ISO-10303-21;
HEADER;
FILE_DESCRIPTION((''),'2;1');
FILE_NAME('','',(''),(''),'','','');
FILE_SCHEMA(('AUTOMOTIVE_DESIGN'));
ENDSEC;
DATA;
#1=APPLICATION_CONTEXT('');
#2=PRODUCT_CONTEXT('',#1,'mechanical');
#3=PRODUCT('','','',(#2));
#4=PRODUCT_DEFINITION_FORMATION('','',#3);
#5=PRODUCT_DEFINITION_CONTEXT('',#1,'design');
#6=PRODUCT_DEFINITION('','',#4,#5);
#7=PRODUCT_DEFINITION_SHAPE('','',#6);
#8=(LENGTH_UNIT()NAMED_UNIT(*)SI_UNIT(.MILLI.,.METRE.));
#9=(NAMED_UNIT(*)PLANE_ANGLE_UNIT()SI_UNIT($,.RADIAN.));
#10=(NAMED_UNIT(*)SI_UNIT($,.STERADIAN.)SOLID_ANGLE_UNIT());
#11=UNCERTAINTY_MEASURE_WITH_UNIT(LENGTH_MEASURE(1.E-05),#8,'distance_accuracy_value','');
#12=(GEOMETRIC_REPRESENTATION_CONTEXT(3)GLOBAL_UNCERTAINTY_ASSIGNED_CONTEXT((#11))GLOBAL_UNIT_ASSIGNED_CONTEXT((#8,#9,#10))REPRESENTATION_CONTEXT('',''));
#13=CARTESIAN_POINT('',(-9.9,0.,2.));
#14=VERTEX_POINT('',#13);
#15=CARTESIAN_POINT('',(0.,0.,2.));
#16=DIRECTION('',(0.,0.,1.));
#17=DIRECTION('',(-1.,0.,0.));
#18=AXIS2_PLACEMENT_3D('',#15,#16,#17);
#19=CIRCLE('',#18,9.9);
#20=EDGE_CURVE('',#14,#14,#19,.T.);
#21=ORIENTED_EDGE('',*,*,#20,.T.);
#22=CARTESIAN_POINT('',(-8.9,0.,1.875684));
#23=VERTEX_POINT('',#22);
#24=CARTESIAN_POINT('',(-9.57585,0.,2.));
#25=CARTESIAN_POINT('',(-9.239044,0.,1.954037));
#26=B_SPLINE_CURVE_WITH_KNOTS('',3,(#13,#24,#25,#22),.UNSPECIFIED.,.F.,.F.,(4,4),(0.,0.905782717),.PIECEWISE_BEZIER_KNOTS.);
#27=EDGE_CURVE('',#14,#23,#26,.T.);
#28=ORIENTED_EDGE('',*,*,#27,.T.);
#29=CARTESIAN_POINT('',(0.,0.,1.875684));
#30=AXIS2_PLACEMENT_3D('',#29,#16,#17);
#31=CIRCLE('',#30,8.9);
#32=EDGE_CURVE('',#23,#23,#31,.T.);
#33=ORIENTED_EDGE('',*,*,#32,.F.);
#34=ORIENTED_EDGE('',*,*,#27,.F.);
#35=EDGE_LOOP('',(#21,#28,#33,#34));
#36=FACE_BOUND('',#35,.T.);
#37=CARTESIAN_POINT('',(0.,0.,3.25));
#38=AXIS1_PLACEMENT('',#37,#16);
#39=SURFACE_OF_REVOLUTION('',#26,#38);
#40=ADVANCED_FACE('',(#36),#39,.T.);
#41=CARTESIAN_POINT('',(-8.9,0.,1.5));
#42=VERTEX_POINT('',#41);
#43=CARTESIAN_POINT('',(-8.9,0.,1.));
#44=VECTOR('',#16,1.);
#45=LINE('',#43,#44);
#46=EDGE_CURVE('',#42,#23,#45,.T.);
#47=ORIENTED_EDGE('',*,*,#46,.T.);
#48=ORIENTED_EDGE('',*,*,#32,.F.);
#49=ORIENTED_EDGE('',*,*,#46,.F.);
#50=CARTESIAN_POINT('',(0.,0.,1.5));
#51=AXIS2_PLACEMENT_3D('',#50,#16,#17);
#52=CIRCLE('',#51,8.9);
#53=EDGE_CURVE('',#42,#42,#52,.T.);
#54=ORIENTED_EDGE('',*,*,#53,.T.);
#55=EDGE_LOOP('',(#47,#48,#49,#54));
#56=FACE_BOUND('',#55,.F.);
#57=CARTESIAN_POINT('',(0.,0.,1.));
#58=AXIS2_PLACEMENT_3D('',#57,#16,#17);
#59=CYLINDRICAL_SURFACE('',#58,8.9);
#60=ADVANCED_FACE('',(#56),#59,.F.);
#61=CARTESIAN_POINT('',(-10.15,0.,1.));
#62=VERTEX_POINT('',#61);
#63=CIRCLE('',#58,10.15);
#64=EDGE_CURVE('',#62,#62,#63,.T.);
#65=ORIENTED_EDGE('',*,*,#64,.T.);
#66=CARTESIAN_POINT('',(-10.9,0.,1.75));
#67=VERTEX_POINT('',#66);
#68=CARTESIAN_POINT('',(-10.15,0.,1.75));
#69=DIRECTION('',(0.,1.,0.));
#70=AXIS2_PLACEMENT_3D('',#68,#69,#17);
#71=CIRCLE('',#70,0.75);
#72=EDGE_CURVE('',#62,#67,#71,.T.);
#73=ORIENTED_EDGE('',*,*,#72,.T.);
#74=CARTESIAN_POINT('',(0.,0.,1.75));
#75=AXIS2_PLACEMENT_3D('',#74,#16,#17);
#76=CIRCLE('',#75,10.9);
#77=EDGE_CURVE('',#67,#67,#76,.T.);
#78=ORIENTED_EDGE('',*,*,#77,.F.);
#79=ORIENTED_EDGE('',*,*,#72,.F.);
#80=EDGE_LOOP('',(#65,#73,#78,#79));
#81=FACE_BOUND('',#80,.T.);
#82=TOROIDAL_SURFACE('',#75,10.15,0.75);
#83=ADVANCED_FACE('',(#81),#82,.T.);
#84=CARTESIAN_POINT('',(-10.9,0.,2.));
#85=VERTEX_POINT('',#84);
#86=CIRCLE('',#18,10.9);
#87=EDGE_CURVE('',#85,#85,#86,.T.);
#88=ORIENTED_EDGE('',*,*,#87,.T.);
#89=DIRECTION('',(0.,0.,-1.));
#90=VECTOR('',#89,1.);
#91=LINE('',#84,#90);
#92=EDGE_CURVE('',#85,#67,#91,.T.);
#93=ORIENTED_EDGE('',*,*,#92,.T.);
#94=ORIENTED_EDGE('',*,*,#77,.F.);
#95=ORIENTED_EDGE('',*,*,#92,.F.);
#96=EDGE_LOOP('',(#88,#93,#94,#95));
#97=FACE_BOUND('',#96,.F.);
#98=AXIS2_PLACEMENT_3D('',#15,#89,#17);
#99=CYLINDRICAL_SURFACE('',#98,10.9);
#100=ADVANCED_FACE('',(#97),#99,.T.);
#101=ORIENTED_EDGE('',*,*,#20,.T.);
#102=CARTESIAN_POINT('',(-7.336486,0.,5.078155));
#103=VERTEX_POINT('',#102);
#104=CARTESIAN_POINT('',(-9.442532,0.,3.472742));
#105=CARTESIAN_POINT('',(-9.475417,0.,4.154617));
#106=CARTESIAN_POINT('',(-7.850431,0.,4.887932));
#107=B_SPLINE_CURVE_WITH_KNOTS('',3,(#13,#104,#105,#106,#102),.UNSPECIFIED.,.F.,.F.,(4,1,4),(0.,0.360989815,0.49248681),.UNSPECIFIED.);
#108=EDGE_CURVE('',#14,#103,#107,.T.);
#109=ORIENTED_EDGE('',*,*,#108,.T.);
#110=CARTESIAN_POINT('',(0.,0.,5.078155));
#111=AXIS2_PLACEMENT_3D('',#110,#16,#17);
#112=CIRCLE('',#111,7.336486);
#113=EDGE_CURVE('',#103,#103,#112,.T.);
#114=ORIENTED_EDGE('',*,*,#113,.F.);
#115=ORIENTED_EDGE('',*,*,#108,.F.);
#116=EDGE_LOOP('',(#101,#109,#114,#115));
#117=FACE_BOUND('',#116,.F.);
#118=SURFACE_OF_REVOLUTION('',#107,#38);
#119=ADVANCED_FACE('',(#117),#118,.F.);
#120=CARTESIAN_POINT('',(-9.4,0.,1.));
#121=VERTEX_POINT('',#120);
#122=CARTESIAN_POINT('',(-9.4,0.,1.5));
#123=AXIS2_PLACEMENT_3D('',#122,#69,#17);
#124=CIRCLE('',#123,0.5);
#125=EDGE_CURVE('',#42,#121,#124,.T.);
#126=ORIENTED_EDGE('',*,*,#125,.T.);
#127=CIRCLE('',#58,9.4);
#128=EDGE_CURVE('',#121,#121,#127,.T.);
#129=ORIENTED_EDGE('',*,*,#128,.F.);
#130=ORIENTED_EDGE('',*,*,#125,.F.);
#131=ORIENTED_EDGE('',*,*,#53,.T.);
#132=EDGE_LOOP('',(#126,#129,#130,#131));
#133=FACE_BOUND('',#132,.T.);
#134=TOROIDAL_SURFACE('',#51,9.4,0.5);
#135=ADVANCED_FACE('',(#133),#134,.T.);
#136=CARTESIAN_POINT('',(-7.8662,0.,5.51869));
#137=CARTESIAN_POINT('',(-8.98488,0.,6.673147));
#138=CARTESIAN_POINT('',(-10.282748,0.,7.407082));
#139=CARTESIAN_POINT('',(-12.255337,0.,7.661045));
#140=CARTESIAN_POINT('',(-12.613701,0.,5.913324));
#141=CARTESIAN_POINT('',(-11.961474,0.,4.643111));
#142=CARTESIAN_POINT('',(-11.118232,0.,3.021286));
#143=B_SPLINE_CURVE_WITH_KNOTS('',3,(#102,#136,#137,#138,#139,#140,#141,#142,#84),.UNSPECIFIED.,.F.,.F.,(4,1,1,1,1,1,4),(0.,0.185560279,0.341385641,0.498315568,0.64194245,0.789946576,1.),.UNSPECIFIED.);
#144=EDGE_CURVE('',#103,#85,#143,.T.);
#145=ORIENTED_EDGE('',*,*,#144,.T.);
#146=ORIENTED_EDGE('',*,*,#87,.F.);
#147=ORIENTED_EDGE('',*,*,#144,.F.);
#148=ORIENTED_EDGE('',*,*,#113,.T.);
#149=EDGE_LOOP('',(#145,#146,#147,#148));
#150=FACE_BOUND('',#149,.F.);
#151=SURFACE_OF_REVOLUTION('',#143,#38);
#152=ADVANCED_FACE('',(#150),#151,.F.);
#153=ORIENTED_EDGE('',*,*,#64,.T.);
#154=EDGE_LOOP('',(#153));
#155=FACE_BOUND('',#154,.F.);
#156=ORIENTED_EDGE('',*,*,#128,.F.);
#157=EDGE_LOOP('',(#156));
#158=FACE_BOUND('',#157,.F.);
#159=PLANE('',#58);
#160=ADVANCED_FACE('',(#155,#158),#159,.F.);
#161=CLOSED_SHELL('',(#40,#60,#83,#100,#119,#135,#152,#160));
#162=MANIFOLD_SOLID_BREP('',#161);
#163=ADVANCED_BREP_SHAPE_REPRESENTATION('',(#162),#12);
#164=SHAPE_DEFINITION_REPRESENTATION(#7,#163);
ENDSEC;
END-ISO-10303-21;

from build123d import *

# Parameters (mm, degrees)
F3_R = 0.5
F4_R = 0.75


with BuildPart() as f1:
    # F0 (on Front) → F1 (revolve)
    with BuildSketch(Plane.XZ):
        with BuildLine():
            add(Edge.make_bspline(
                [(-9.9, 2), (-9.5758501784, 2), (-9.2390440685, 1.9540368163), (-8.9, 1.8756836241)],
                knots=[0, 0, 0, 0, 0.9057827175, 0.9057827175, 0.9057827175, 0.9057827175], degree=3))
            add(Edge.make_bspline(
                [(-9.9, 2), (-9.4425315337, 3.4727421793), (-9.475417137, 4.1546168904), (-7.8504308779, 4.8879319086), (-7.3364856621, 5.0781547656)],
                knots=[0, 0, 0, 0, 0.3609898147, 0.4924868102, 0.4924868102, 0.4924868102, 0.4924868102], degree=3))
            add(Edge.make_bspline(
                [(-7.3364856621, 5.0781547656), (-7.8661996988, 5.5186899413), (-8.9848796151, 6.6731469392), (-10.2827477013, 7.4070818452), (-12.2553368007, 7.6610451612), (-12.6137007512, 5.9133238981), (-11.9614741658, 4.6431108193), (-11.1182323438, 3.0212863117), (-10.9, 2)],
                knots=[0, 0, 0, 0, 0.1855602792, 0.3413856413, 0.4983155684, 0.6419424505, 0.7899465755, 1, 1, 1, 1], degree=3))
            Line((-10.9, 2), (-10.9, 1))
            Line((-10.9, 1), (-8.9, 1))
            Line((-8.9, 1), (-8.9, 1.8756836241))
        make_face()
    revolve(axis=Axis((0, 0, 3.25), (0, 0, 1)))

    # F3
    f3_edges = [f1.edges().sort_by_distance(p)[0] for p in [
        (8.9, 0, 1),
    ]]
    fillet(f3_edges, radius=F3_R)

    # F4
    f4_edges = [f1.edges().sort_by_distance(p)[0] for p in [
        (10.9, 0, 1),
    ]]
    fillet(f4_edges, radius=F4_R)


solid = f1.part
